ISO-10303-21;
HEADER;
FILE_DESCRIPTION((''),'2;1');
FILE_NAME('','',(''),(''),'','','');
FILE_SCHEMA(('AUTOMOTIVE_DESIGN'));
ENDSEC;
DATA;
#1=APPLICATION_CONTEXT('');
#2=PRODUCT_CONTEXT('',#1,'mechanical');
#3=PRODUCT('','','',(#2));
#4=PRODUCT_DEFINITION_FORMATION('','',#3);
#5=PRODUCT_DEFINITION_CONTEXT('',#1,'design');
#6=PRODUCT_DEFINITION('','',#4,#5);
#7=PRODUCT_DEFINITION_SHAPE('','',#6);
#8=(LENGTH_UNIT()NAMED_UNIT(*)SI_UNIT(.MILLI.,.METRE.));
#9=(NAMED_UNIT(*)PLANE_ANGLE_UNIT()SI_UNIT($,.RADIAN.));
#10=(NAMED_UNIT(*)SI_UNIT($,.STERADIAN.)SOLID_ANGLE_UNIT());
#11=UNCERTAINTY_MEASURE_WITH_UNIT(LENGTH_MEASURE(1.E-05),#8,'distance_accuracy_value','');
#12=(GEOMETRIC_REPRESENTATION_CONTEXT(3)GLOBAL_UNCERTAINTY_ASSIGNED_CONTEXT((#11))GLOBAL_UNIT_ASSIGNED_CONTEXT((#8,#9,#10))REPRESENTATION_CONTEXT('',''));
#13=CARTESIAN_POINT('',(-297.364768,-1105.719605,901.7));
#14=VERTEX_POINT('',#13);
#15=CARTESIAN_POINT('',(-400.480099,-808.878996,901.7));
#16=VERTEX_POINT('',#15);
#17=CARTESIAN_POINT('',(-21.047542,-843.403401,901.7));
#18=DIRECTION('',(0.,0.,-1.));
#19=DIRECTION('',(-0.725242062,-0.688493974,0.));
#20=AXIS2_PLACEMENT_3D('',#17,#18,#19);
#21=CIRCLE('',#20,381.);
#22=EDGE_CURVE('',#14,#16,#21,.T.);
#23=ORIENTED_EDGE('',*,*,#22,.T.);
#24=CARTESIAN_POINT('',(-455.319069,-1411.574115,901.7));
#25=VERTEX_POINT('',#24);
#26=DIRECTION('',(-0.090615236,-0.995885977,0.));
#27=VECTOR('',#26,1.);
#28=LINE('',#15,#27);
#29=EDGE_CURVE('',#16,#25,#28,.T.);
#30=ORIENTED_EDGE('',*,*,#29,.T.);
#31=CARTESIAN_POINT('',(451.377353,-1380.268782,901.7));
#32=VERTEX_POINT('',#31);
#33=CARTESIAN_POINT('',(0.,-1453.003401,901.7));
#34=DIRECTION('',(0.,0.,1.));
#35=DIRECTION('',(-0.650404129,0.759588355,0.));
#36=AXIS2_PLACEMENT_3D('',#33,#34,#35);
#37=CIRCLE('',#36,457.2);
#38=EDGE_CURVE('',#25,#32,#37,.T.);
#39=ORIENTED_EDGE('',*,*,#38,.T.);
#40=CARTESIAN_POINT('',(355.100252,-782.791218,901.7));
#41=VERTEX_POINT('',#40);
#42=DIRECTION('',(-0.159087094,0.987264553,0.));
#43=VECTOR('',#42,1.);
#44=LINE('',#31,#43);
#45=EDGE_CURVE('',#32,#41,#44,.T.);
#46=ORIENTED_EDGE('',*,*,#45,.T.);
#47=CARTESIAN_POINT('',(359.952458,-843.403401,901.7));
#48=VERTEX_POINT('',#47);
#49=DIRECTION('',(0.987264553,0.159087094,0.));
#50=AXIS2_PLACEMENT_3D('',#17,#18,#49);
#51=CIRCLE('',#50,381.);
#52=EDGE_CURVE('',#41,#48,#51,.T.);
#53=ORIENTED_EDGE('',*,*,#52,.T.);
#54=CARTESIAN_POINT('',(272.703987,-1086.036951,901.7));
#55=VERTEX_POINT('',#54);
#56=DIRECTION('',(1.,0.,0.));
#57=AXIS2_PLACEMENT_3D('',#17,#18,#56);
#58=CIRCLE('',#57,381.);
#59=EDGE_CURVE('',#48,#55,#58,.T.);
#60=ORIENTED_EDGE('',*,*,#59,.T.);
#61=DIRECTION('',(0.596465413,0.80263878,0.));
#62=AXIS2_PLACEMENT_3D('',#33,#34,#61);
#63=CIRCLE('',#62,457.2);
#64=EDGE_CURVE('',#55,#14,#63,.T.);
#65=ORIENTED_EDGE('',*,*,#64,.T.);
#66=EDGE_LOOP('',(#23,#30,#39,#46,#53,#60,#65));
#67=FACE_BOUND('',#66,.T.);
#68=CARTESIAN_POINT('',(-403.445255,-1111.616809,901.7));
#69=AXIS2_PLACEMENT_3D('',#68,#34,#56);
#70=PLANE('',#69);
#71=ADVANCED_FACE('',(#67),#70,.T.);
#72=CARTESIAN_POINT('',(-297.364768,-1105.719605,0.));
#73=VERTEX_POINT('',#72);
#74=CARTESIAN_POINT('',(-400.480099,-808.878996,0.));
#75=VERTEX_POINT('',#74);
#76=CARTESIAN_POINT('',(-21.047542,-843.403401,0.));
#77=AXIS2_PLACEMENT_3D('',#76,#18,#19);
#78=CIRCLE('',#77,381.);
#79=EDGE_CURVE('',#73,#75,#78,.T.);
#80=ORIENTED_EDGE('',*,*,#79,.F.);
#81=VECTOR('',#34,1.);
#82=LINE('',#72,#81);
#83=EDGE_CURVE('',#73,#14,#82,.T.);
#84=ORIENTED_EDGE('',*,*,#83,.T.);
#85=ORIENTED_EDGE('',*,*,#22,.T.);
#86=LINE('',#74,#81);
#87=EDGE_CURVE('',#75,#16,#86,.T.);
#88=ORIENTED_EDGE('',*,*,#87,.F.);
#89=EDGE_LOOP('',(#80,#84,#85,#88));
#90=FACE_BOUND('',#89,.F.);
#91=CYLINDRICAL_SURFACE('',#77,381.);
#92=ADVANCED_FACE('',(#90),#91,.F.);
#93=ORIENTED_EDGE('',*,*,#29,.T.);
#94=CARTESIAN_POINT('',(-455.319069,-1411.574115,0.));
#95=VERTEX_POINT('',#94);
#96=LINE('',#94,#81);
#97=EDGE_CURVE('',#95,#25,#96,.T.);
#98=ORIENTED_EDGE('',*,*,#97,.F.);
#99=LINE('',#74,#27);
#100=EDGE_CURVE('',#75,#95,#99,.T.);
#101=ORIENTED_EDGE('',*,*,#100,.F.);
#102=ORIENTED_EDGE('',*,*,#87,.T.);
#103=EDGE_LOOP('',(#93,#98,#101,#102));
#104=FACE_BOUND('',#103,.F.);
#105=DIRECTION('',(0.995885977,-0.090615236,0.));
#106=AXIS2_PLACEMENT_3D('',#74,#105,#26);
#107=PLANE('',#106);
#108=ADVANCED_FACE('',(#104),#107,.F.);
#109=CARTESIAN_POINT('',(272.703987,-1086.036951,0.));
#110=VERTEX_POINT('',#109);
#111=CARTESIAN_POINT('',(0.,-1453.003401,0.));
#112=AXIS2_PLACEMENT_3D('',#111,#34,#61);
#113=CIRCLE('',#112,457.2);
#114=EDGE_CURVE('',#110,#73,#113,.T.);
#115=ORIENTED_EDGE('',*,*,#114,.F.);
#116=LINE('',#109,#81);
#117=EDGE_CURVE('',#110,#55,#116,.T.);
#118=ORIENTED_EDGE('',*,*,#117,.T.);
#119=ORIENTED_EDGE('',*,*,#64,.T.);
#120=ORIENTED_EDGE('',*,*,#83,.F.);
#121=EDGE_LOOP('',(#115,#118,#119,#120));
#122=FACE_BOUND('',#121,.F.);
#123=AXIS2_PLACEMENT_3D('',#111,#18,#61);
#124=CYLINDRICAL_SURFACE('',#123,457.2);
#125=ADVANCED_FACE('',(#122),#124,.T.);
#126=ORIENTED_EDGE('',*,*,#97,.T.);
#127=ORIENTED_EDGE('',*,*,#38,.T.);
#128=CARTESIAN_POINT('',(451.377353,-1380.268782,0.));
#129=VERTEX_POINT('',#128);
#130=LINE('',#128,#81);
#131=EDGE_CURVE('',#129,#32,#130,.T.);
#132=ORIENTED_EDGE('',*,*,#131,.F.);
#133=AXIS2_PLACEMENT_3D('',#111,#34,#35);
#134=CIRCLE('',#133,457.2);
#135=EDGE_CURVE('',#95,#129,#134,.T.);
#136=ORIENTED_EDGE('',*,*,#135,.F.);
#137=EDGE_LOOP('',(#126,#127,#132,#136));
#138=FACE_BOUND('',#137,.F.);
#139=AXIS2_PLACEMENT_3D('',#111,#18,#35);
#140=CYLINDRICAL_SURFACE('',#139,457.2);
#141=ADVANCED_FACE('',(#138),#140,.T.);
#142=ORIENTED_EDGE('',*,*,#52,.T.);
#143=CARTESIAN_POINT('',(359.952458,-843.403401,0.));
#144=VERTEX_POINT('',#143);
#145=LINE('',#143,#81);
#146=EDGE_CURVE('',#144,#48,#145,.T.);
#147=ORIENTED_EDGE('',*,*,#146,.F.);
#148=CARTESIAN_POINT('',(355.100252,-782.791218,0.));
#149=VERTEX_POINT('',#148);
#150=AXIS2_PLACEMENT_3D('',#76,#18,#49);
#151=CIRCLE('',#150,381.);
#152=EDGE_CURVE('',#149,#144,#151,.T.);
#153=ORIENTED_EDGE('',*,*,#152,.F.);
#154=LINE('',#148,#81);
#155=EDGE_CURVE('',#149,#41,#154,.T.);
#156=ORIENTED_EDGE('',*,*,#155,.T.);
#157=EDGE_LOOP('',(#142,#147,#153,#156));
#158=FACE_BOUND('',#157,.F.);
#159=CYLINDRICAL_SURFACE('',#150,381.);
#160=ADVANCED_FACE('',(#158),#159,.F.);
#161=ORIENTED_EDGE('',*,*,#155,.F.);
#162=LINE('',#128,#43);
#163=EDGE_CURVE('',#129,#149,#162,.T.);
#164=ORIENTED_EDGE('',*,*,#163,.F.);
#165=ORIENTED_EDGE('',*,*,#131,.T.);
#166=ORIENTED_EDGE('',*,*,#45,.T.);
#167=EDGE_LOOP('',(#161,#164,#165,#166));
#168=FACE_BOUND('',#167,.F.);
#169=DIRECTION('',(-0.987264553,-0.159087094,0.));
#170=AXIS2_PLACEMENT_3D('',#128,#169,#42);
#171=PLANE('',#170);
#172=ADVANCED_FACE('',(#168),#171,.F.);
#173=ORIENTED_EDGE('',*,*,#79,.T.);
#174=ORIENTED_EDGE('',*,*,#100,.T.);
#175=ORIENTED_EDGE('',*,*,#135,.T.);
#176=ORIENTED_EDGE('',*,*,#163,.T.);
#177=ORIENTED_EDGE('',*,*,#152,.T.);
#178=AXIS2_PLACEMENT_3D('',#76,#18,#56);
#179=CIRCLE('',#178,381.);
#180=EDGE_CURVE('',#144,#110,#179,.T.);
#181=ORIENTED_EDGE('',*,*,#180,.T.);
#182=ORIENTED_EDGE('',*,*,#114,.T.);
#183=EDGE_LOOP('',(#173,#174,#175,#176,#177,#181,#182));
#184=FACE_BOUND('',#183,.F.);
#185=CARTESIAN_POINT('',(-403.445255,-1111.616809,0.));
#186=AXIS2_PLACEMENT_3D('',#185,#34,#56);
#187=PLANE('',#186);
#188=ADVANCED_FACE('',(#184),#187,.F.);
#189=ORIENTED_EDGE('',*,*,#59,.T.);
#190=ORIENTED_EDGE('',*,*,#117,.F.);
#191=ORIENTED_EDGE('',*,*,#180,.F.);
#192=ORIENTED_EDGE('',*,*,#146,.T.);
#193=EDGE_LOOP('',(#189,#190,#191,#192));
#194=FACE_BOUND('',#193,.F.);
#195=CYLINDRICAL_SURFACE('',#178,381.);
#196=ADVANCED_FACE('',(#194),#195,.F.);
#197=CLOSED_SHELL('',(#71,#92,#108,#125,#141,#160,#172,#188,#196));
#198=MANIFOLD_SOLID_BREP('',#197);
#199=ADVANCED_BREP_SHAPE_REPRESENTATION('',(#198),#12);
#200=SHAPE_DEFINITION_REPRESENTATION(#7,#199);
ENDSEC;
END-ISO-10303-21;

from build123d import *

# Parameters (mm, degrees)
F1_DEPTH = 901.7


# Not quite as in the source:
# - a feature names something its author has since deleted; it is built from what else it names


with BuildPart() as f1:
    # F0 (on Top) → F1 (new body)
    with BuildSketch(Plane.XY):
        with BuildLine():
            ThreePointArc((-297.3647676133, -1105.7196050937), (-380.9510446566, -968.4252745053), (-400.480099263, -808.8789961161))
            Line((-400.480099263, -808.8789961161), (-455.3190686334, -1411.5741151153))
            ThreePointArc((-455.3190686334, -1411.5741151153), (-406.2265189052, -1243.2133743356), (-297.3647676132, -1105.7196050937))
        make_face()
        with BuildLine():
            ThreePointArc((-297.3647676133, -1105.7196050937), (-7.9006621425, -1224.1765088207), (272.7039865955, -1086.0369507529))
            ThreePointArc((272.7039865955, -1086.0369507529), (-15.7762559112, -996.0756718787), (-297.3647676132, -1105.7196050937))
        make_face()
        with BuildLine():
            ThreePointArc((355.1002524449, -782.7912184935), (358.7374692929, -813.000356121), (359.9524579315, -843.4034011198))
            ThreePointArc((359.9524579315, -843.4034011198), (337.477444802, -972.3252138184), (272.7039865955, -1086.0369507529))
            ThreePointArc((272.7039865955, -1086.0369507529), (390.7896356908, -1215.6949507084), (451.377353416, -1380.2687819682))
            Line((451.377353416, -1380.2687819682), (355.1002524449, -782.7912184935))
        make_face()
        with BuildLine():
            ThreePointArc((451.377353416, -1380.2687819682), (390.7896356908, -1215.6949507084), (272.7039865955, -1086.0369507529))
            ThreePointArc((272.7039865955, -1086.0369507529), (-7.9006621425, -1224.1765088207), (-297.3647676133, -1105.7196050937))
            ThreePointArc((-297.3647676132, -1105.7196050937), (-406.2265189052, -1243.2133743356), (-455.3190686334, -1411.5741151153))
            ThreePointArc((-455.3190686334, -1411.5741151153), (-20.7359810574, -1909.7329262105), (457.2, -1453.0034011198))
            ThreePointArc((457.2, -1453.0034011198), (455.7420136337, -1416.5197471212), (451.377353416, -1380.2687819682))
        make_face()
    extrude(amount=F1_DEPTH)


solid = f1.part
